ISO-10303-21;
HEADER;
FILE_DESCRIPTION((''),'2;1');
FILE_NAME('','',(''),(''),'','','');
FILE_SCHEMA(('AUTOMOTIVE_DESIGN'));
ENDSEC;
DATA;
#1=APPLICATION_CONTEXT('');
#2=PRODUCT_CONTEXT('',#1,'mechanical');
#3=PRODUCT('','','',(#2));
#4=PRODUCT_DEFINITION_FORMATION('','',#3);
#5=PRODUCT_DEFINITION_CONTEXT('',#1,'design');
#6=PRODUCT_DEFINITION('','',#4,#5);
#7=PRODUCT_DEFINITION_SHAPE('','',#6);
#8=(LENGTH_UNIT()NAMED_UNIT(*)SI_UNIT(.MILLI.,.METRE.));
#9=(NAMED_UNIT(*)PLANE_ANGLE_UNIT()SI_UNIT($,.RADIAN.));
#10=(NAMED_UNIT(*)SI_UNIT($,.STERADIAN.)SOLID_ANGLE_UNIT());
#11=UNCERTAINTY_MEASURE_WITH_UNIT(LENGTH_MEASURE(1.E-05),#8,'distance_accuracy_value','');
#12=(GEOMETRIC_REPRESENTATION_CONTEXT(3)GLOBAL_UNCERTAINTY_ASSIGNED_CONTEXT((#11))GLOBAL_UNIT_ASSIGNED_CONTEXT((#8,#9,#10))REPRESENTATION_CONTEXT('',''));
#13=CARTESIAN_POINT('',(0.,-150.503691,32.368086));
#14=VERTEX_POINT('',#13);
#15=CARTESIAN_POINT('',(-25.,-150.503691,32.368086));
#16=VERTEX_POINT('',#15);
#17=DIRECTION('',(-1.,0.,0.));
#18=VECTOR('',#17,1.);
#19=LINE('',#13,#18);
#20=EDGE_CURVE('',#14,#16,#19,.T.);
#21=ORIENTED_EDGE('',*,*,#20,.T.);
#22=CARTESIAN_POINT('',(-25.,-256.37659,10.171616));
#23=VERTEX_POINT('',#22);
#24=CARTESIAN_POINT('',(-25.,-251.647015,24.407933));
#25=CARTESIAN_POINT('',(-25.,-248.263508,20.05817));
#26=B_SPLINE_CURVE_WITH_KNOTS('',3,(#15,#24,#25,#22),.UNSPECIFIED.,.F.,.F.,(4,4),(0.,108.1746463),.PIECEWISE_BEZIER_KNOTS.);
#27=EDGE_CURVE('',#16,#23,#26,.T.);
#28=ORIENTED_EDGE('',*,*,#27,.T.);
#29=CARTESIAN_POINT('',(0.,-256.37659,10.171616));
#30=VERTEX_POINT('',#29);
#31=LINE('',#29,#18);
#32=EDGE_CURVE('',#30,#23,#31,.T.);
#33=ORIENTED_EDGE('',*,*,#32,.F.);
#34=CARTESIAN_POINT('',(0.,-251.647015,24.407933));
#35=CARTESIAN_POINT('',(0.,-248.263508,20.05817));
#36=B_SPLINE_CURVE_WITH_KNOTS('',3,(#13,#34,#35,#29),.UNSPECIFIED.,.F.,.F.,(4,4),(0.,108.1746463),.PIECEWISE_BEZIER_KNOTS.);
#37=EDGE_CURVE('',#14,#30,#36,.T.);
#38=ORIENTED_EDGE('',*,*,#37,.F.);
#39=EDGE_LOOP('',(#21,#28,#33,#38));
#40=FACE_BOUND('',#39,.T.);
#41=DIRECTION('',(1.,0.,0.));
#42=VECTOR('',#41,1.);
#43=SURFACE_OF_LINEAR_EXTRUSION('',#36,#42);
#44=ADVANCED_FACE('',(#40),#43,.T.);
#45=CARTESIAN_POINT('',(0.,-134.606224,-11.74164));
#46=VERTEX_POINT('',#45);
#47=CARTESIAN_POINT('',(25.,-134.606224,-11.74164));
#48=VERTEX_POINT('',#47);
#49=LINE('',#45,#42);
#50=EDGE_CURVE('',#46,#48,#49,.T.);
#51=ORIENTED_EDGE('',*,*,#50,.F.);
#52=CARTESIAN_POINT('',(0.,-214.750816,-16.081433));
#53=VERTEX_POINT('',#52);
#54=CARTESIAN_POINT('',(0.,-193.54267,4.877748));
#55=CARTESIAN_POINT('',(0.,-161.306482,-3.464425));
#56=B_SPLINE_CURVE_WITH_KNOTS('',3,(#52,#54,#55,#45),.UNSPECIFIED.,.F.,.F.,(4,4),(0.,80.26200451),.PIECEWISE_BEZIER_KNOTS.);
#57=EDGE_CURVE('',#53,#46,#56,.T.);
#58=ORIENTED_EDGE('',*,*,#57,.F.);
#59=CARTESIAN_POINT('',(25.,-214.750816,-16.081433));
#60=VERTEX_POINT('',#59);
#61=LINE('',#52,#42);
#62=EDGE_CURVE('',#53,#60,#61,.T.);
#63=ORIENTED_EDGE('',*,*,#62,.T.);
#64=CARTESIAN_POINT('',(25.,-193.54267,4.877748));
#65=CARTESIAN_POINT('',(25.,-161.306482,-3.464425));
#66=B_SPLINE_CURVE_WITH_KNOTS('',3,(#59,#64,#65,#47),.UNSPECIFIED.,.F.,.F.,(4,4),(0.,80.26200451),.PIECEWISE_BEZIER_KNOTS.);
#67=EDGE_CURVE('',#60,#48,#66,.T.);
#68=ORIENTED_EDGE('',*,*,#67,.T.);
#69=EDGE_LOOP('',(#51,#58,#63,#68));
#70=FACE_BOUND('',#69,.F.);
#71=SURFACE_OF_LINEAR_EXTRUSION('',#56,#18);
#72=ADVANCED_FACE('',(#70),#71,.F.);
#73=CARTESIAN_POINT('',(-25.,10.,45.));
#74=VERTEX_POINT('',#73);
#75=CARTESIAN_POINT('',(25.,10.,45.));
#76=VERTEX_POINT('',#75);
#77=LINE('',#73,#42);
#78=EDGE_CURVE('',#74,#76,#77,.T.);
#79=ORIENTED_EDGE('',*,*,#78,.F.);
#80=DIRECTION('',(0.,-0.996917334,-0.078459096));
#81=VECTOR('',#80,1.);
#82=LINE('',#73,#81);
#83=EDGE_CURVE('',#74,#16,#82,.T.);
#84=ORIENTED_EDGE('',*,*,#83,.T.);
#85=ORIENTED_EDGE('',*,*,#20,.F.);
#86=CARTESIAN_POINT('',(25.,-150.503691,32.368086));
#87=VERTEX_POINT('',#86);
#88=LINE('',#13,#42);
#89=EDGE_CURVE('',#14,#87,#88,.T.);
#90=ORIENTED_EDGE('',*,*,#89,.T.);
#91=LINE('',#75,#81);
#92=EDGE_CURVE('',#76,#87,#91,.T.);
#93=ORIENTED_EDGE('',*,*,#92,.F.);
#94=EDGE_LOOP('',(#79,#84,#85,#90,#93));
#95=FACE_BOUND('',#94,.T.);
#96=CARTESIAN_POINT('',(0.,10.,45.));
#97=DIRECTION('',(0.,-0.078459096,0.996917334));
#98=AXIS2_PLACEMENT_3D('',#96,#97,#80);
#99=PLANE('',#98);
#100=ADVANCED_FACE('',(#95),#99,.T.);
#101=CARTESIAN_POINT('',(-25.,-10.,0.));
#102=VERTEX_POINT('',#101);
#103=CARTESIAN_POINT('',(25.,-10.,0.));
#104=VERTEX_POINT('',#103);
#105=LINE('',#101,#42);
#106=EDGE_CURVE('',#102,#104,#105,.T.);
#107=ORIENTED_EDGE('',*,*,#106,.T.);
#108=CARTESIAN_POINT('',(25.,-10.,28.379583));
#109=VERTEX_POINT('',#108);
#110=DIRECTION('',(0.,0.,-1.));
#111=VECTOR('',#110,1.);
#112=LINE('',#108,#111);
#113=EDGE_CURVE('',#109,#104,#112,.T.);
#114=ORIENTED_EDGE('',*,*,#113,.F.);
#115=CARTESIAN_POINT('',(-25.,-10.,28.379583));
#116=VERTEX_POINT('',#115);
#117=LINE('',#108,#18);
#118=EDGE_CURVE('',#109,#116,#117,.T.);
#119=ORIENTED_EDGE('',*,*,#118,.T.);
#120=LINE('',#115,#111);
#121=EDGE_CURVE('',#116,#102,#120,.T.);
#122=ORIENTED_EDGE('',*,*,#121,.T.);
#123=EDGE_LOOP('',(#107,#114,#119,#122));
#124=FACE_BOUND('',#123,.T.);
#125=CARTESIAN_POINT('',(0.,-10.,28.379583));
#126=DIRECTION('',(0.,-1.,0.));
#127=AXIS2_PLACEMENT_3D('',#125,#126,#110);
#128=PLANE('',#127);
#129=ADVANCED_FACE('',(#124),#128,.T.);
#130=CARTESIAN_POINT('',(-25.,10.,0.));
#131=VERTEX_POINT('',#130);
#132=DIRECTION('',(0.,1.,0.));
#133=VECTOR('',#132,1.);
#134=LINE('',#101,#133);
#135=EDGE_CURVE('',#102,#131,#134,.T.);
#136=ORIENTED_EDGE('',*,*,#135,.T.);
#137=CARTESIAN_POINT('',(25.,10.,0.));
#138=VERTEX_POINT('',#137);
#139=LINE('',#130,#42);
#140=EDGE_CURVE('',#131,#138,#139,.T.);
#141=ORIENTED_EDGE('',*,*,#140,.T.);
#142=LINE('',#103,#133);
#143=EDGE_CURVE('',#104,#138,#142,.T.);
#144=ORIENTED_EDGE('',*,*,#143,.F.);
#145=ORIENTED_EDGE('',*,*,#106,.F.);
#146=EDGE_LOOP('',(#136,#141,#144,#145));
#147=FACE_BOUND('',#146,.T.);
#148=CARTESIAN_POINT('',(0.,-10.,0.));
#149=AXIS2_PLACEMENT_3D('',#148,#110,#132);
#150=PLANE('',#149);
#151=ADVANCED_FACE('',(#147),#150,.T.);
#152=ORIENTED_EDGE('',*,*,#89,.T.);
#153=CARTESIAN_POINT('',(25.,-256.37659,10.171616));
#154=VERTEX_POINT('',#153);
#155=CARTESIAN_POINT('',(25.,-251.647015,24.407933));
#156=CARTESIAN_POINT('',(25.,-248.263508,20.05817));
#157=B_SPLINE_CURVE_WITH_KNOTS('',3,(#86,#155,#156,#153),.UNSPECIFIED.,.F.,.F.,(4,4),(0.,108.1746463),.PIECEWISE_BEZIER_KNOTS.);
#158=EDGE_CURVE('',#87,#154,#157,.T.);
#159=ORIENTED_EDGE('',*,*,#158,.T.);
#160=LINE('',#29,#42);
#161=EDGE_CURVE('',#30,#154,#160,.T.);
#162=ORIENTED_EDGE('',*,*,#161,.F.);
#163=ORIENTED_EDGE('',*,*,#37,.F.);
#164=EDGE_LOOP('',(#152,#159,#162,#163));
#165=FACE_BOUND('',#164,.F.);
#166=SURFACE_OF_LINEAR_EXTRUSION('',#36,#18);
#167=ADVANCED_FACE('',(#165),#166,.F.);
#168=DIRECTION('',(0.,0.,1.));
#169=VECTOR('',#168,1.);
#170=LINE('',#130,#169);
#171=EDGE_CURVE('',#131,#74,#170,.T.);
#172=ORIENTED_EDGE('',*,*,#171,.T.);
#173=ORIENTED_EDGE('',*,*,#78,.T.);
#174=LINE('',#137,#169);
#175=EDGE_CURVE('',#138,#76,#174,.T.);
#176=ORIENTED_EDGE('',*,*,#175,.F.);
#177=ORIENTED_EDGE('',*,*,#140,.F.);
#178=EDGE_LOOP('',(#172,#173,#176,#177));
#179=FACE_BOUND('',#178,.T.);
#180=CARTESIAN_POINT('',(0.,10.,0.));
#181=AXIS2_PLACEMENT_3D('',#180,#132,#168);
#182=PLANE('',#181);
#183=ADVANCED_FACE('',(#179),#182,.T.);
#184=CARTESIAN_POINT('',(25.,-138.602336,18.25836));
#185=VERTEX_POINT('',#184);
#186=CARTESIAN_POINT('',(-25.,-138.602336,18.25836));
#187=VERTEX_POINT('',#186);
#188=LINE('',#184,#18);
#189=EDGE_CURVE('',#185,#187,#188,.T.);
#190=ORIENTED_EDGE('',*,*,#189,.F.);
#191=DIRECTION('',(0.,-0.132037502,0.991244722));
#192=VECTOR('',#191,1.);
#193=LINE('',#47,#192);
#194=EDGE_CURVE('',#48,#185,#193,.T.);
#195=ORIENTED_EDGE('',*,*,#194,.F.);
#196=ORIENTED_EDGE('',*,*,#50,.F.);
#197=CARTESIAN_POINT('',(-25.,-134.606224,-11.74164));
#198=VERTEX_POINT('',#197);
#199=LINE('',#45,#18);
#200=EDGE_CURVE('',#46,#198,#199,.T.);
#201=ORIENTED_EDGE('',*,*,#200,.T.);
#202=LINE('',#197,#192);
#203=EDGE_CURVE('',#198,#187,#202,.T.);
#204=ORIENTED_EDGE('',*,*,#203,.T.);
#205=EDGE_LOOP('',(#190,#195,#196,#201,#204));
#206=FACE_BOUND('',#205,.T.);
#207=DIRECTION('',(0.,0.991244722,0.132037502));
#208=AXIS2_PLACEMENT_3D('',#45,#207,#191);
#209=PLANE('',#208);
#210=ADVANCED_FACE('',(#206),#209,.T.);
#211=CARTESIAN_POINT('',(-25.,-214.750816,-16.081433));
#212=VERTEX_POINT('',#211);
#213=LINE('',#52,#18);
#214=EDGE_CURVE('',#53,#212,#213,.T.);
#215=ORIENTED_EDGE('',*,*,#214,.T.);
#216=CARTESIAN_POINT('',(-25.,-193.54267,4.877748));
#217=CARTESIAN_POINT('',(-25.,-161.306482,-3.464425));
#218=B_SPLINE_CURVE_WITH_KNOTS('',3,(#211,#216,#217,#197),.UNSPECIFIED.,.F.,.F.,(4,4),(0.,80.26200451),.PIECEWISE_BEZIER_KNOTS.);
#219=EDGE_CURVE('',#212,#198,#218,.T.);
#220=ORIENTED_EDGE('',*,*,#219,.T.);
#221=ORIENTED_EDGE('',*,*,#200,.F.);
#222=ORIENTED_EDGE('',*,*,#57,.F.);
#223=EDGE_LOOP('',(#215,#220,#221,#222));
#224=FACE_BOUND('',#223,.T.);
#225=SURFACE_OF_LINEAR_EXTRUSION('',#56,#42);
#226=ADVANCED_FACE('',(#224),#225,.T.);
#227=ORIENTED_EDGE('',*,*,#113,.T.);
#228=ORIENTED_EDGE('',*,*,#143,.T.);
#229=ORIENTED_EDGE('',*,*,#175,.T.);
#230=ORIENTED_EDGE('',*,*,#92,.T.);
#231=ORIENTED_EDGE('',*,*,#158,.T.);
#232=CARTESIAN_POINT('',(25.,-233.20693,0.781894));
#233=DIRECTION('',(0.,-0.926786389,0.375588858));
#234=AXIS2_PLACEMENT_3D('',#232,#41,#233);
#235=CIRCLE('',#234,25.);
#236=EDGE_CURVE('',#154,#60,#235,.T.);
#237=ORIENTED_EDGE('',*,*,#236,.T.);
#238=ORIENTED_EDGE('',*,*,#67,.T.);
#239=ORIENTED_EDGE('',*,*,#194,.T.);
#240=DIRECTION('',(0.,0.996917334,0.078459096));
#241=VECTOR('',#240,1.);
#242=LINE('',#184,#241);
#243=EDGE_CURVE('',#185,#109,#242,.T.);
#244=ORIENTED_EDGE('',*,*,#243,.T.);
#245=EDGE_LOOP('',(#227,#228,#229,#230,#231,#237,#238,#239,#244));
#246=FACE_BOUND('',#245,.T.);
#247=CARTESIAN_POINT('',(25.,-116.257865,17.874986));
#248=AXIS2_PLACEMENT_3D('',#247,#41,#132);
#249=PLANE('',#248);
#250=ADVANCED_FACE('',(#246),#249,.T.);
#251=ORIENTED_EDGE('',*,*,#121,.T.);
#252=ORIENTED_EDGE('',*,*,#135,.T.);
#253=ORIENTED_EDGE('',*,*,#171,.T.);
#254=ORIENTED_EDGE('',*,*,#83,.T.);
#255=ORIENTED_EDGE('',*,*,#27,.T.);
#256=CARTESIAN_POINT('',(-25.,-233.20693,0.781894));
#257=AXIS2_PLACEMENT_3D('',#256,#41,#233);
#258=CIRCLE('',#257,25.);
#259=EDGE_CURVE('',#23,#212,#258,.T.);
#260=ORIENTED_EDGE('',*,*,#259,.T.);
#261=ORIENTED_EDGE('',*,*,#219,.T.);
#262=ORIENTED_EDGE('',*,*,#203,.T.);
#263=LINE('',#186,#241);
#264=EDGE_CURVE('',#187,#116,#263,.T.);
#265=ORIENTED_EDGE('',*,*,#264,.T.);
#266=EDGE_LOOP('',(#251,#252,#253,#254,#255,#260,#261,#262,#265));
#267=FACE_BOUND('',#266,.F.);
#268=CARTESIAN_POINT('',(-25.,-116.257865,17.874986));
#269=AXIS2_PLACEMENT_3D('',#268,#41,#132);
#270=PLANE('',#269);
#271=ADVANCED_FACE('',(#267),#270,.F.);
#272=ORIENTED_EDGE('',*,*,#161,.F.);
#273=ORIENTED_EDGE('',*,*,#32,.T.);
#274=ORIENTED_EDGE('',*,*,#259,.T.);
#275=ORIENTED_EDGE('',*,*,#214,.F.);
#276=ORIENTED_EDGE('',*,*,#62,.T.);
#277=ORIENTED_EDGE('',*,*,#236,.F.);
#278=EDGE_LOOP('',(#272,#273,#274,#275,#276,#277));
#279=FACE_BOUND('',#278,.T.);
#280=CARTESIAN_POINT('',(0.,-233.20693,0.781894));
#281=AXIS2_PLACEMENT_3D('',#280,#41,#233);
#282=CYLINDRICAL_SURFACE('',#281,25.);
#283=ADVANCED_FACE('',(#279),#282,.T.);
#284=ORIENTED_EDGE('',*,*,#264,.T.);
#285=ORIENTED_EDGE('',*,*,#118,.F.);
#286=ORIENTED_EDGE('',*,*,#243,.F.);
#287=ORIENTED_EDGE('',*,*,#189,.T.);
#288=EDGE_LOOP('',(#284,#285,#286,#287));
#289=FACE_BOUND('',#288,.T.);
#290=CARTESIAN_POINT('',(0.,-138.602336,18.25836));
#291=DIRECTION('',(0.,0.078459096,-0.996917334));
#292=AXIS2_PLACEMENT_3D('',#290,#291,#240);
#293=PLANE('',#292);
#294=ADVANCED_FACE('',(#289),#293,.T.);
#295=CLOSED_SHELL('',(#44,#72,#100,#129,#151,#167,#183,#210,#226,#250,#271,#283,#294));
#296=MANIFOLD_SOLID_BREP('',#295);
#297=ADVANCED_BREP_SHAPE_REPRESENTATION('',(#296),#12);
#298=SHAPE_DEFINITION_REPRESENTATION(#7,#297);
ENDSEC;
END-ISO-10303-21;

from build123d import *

# Parameters (mm, degrees)
F1_DEPTH = 25


# Not quite as in the source:
# - a feature of the source that left no trace in its solid (it failed there, or was rolled back) is left out


with BuildPart() as f1:
    # F0 (on Right) → F1 (new body, symmetric)
    with BuildSketch(Plane.YZ):
        with BuildLine():
            Line((-10, 28.3795828863), (-10, 0))
            Line((-10, 0), (10, 0))
            Line((10, 0), (10, 45))
            Line((10, 45), (-150.503690731, 32.3680855878))
            add(Edge.make_bspline(
                [(-150.503690731, 32.3680855878), (-251.6470152481, 24.4079333144), (-248.2635080814, 20.058169961), (-256.3765901785, 10.171615941)],
                knots=[0, 0, 0, 0, 108.1746463003, 108.1746463003, 108.1746463003, 108.1746463003], degree=3))
            ThreePointArc((-256.3765901785, 10.171615941), (-246.5433476591, -20.3637900829), (-214.7508155307, -16.0814332135))
            add(Edge.make_bspline(
                [(-214.7508155307, -16.0814332135), (-193.5426698765, 4.8777479678), (-161.3064821603, -3.4644254483), (-134.6062239053, -11.7416404626)],
                knots=[0, 0, 0, 0, 80.2620045097, 80.2620045097, 80.2620045097, 80.2620045097], degree=3))
            Line((-134.6062239053, -11.7416404626), (-138.6023360516, 18.2583595374))
            Line((-138.6023360516, 18.2583595374), (-10, 28.3795828863))
        make_face()
    extrude(amount=F1_DEPTH, both=True)


solid = f1.part
